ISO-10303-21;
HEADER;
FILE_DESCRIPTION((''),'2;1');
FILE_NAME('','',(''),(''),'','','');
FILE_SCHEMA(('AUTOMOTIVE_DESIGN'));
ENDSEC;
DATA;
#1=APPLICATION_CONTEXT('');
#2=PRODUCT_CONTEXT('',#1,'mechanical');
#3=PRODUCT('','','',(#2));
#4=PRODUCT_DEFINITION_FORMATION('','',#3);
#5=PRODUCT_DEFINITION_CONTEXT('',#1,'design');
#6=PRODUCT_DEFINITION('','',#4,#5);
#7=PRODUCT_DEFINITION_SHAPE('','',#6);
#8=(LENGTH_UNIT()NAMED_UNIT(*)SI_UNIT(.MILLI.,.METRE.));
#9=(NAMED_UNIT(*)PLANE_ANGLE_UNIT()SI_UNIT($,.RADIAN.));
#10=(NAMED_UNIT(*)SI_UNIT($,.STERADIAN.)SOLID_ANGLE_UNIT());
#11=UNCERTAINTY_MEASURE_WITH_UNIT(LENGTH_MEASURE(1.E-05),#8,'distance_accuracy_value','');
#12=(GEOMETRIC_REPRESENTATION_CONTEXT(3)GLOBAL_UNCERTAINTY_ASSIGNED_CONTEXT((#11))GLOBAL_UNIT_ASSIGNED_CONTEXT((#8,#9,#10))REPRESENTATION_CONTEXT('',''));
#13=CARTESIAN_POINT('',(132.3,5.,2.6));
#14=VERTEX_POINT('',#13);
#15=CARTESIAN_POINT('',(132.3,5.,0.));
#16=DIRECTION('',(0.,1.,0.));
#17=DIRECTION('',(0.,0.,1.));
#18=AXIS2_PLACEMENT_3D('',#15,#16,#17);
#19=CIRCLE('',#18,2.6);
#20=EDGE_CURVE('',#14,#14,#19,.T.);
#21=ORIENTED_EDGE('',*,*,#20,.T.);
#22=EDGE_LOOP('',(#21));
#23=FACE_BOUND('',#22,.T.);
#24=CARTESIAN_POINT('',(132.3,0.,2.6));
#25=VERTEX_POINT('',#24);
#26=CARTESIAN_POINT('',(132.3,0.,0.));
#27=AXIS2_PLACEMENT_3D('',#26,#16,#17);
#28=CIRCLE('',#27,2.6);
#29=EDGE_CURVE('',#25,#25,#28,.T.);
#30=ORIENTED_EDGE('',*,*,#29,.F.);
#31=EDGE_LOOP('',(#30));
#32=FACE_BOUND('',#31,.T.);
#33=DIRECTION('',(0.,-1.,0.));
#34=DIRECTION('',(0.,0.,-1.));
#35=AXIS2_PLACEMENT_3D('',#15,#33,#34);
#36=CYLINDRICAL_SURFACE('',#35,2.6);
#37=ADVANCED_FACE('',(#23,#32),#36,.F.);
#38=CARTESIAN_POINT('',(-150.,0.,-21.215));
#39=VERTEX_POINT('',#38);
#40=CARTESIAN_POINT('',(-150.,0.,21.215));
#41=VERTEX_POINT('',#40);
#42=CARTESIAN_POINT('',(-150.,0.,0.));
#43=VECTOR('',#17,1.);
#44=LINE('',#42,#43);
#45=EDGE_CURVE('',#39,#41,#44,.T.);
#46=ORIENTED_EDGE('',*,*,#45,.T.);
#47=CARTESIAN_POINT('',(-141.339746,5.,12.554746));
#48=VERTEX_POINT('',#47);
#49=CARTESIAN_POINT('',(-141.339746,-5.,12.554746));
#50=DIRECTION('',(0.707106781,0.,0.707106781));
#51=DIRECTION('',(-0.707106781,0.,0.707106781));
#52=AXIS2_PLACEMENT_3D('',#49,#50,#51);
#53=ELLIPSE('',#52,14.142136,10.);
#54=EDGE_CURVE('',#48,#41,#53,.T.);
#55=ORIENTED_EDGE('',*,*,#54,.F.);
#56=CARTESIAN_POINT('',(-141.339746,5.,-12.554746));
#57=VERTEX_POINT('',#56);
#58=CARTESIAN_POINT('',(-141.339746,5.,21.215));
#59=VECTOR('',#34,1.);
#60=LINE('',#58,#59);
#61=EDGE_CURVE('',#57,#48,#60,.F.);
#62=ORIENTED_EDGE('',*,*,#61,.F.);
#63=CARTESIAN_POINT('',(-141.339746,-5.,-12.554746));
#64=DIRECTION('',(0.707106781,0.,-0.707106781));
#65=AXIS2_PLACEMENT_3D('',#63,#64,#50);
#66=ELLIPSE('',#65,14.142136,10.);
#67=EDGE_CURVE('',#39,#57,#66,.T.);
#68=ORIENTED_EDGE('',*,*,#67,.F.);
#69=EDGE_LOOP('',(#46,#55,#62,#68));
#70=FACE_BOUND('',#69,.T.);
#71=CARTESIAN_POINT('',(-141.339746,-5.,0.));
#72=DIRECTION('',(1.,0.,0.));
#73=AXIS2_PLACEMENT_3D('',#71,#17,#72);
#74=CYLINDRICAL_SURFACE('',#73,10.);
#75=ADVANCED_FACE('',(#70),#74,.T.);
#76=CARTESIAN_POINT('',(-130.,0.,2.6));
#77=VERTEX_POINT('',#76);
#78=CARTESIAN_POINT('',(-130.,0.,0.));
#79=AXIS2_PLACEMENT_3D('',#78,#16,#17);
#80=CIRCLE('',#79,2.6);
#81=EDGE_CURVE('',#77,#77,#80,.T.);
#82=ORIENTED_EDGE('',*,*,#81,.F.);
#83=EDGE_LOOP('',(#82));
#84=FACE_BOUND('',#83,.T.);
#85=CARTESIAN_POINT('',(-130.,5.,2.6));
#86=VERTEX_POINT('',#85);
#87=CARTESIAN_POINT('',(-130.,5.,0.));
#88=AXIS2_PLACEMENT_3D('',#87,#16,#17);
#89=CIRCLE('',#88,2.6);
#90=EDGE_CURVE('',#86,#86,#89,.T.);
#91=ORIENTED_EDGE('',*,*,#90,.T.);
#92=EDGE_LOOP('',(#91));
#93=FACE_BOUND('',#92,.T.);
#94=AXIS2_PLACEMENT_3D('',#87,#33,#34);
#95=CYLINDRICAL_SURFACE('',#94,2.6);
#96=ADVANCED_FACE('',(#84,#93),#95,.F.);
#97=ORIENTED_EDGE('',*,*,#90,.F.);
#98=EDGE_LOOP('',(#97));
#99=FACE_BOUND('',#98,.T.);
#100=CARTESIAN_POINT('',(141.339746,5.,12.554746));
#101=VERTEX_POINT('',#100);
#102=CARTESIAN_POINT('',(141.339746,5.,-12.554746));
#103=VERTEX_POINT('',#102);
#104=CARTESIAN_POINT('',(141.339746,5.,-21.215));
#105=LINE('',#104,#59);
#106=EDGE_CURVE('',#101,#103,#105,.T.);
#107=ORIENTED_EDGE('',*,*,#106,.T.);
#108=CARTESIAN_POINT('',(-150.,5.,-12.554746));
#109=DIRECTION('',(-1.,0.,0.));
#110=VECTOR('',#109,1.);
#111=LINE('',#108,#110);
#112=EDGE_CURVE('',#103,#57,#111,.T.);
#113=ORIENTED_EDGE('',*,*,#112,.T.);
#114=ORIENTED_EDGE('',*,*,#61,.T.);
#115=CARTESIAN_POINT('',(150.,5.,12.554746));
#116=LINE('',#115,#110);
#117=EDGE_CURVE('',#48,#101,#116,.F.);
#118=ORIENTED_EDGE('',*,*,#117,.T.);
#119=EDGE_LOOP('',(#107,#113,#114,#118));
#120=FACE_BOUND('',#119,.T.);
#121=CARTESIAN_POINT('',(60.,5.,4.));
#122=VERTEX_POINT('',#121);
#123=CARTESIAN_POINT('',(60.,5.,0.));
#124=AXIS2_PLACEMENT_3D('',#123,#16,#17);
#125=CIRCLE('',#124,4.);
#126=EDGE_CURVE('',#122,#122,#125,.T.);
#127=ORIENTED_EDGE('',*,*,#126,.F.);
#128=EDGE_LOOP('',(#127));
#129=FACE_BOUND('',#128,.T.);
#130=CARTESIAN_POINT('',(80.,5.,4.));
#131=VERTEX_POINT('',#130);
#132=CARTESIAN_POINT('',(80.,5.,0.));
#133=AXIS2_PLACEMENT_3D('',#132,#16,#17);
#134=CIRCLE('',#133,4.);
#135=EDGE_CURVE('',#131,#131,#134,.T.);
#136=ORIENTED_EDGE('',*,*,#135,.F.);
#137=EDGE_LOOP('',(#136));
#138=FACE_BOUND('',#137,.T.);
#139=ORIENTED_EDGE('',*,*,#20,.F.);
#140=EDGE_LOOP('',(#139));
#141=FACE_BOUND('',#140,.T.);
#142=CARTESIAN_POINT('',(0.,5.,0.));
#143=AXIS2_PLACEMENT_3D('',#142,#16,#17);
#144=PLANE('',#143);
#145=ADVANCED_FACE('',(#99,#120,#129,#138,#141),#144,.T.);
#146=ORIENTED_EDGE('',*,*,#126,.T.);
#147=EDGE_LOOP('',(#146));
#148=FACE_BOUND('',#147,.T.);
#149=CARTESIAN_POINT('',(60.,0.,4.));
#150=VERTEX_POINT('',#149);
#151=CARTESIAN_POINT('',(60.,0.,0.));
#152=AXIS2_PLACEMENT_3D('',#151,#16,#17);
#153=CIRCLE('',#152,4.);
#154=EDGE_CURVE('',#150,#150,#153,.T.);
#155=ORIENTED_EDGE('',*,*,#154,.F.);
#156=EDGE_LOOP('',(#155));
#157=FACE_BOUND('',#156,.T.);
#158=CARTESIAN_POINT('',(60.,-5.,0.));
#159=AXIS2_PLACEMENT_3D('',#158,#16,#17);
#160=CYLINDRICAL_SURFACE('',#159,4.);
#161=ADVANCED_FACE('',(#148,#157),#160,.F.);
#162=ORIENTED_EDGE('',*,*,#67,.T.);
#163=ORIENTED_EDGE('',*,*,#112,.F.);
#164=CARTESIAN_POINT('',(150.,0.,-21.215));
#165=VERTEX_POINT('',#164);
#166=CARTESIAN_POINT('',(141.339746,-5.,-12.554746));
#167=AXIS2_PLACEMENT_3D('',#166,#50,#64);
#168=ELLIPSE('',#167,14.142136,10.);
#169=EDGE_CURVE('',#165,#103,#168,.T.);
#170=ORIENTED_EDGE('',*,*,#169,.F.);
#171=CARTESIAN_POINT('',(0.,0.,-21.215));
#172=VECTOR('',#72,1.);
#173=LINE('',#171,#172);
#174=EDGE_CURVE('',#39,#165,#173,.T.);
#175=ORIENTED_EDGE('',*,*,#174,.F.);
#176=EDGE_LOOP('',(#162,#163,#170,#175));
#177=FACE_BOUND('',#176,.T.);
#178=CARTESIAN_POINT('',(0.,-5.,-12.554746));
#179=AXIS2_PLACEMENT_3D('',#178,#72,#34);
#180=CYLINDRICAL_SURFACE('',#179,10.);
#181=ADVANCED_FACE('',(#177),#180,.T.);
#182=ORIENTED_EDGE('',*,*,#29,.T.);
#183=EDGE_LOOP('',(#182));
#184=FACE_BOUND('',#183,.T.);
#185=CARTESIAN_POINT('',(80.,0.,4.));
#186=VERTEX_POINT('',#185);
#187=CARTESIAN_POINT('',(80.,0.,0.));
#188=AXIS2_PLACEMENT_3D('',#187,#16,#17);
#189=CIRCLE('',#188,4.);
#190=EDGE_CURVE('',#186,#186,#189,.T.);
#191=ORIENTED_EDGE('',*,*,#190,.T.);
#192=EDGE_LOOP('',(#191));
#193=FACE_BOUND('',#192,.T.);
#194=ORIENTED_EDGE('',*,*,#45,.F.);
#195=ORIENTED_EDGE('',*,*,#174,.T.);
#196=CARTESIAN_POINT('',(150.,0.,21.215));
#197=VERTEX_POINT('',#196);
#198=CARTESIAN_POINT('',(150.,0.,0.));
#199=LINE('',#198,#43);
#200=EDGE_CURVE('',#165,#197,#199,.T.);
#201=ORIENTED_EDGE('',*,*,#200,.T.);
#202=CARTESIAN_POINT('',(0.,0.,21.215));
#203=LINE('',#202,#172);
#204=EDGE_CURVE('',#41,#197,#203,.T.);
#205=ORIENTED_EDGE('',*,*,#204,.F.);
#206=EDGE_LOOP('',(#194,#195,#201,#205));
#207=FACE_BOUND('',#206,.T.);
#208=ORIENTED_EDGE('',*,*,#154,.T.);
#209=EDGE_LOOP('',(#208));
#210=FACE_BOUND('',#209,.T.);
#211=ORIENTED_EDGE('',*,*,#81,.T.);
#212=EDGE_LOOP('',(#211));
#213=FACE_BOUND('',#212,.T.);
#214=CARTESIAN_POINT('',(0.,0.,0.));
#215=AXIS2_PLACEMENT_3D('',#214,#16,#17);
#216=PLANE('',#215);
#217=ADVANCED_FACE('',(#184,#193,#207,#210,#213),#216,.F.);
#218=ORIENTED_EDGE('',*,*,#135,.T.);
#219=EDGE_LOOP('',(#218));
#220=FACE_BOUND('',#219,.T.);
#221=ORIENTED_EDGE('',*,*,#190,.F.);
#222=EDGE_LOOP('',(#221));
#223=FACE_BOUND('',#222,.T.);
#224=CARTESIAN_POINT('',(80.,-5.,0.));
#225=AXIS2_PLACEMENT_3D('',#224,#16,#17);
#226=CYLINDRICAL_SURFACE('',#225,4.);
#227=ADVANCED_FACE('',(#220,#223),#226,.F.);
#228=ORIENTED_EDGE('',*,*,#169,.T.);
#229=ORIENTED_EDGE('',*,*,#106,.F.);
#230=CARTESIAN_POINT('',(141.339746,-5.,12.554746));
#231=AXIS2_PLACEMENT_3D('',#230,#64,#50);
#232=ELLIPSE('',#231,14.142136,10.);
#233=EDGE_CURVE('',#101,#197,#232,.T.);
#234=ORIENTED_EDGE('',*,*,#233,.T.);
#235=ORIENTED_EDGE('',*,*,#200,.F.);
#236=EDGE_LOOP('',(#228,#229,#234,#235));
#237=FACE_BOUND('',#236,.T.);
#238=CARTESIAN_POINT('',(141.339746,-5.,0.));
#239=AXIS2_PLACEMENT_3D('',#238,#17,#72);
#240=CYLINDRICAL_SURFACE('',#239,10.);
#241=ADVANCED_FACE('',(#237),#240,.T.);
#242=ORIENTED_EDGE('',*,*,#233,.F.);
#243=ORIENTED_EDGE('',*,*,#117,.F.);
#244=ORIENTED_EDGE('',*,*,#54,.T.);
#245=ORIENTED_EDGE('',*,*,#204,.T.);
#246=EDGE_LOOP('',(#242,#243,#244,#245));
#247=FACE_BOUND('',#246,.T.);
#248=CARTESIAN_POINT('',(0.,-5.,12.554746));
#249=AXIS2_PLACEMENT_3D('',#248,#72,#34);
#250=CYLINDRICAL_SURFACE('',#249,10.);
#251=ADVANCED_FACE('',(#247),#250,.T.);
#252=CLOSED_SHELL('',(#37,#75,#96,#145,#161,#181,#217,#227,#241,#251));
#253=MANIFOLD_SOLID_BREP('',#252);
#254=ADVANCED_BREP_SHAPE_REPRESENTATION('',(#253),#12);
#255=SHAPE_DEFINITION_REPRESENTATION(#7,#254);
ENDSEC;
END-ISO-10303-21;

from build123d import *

# Parameters (mm, degrees)
SKETCH_1_W          = 21
SKETCH_1_H          = 42.43
SKETCH_1_R          = 2.6
EXTRUDE_1_DEPTH     = 5
FILLET_1_R          = 10
CUT_EXTRUDE_1_DEPTH = 10


with BuildPart() as part:
    # 草图1 → 凸台-拉伸1 (new body)
    # profile 1 of 3: a face of its own
    with BuildSketch(Plane(origin=(0, 0, 0), x_dir=(1, 0, 0), z_dir=(0, 1, 0))):
        with BuildLine():
            Line((-129, 2.4), (-129, 21.215))
            Line((-129, 21.215), (-150, 21.215))
            Line((-150, 21.215), (-150, -21.215))
            Line((-150, -21.215), (-129, -21.215))
            Line((-129, -21.215), (-129, -2.4))
            ThreePointArc((-129, -2.4), (-132.6, 0), (-129, 2.4))
        make_face()
    # profile 2 of 3: a face of its own
    with BuildSketch(Plane(origin=(0, 0, 0), x_dir=(1, 0, 0), z_dir=(0, 1, 0))):
        with BuildLine():
            Line((129, 21.215), (-129, 21.215))
            Line((-129, 21.215), (-129, 2.4))
            ThreePointArc((-129, 2.4), (-127.836669235, 1.44222051), (-127.4, 0))
            ThreePointArc((-127.4, 0), (-127.836669235, -1.44222051), (-129, -2.4))
            Line((-129, -2.4), (-129, -21.215))
            Line((-129, -21.215), (129, -21.215))
            Line((129, -21.215), (129, 21.215))
        make_face()
    # profile 3 of 3: a face of its own
    with BuildSketch(Plane(origin=(0, 0, 0), x_dir=(1, 0, 0), z_dir=(0, 1, 0))):
        with Locations((139.5, 0)):
            Rectangle(SKETCH_1_W, SKETCH_1_H)
        with Locations(Location((132.3, 0, 0), (0, 0, 270))):
            Circle(SKETCH_1_R, mode=Mode.SUBTRACT)
    extrude(amount=EXTRUDE_1_DEPTH)

    # 圆角1
    # the kernel refuses this fillet: 10 mm, written as the material it takes off along each edge
    with BuildSketch(Plane(origin=(150, 5, 42.865635095), x_dir=(-1, 0, 0), z_dir=(0, 0, -1)), Plane(origin=(-150, 5, -42.865635095), x_dir=(1, 0, 0), z_dir=(0, 0, 1))) as fillet_1_piece_1:
        with BuildLine():
            CenterArc((8.660254038, -10), FILLET_1_R, 90, 60)
            Line((0, -5), (-0.173205081, -4.9))
            ThreePointArc((-0.173205081, -4.9), (-0.2, -2.5), (-0.2, 0))
            Line((-0.2, 0), (0, 0.2))
            Line((0, 0.2), (8.660254038, 0.2))
            Line((8.660254038, 0.2), (8.660254038, 0))
        make_face()
    extrude(amount=85.731270189, mode=Mode.SUBTRACT)
    with BuildSketch(Plane(origin=(-171.650635095, 5, 21.215), x_dir=(0, 0, -1), z_dir=(1, 0, 0))) as fillet_1_piece_2:
        with BuildLine():
            CenterArc((8.660254038, -10), FILLET_1_R, 90, 60)
            Line((0, -5), (-0.173205081, -4.9))
            ThreePointArc((-0.173205081, -4.9), (-0.2, -2.5), (-0.2, 0))
            Line((-0.2, 0), (0, 0.2))
            Line((0, 0.2), (8.660254038, 0.2))
            Line((8.660254038, 0.2), (8.660254038, 0))
        make_face()
    extrude(amount=343.301270189, mode=Mode.SUBTRACT)
    with BuildSketch(Plane(origin=(-171.650635095, 5, -21.215), x_dir=(0, -1, 0), z_dir=(1, 0, 0))) as fillet_1_piece_3:
        with BuildLine():
            CenterArc((10, -8.660254038), FILLET_1_R, 120, 60)
            Line((0, -8.660254038), (-0.2, -8.660254038))
            Line((-0.2, -8.660254038), (-0.2, 0))
            Line((-0.2, 0), (0, 0.2))
            ThreePointArc((0, 0.2), (2.5, 0.2), (4.9, 0.173205081))
            Line((4.9, 0.173205081), (5, 0))
        make_face()
    extrude(amount=343.301270189, mode=Mode.SUBTRACT)

    # 草图2 → 切除-拉伸1 (cut)
    with BuildSketch(Plane(origin=(0, 5, 0), x_dir=(1, 0, 0), z_dir=(0, 1, 0))):
        with BuildLine():
            ThreePointArc((64, 0), (60, 4), (56, 0))
            Line((56, 0), (64, 0))
        make_face()
        with BuildLine():
            Line((64, 0), (56, 0))
            ThreePointArc((56, 0), (60, -4), (64, 0))
        make_face()
        with BuildLine():
            ThreePointArc((84, 0), (80, 4), (76, 0))
            Line((76, 0), (84, 0))
        make_face()
        with BuildLine():
            Line((84, 0), (76, 0))
            ThreePointArc((76, 0), (80, -4), (84, 0))
        make_face()
    extrude(amount=-CUT_EXTRUDE_1_DEPTH, mode=Mode.SUBTRACT)


solid = part.part
